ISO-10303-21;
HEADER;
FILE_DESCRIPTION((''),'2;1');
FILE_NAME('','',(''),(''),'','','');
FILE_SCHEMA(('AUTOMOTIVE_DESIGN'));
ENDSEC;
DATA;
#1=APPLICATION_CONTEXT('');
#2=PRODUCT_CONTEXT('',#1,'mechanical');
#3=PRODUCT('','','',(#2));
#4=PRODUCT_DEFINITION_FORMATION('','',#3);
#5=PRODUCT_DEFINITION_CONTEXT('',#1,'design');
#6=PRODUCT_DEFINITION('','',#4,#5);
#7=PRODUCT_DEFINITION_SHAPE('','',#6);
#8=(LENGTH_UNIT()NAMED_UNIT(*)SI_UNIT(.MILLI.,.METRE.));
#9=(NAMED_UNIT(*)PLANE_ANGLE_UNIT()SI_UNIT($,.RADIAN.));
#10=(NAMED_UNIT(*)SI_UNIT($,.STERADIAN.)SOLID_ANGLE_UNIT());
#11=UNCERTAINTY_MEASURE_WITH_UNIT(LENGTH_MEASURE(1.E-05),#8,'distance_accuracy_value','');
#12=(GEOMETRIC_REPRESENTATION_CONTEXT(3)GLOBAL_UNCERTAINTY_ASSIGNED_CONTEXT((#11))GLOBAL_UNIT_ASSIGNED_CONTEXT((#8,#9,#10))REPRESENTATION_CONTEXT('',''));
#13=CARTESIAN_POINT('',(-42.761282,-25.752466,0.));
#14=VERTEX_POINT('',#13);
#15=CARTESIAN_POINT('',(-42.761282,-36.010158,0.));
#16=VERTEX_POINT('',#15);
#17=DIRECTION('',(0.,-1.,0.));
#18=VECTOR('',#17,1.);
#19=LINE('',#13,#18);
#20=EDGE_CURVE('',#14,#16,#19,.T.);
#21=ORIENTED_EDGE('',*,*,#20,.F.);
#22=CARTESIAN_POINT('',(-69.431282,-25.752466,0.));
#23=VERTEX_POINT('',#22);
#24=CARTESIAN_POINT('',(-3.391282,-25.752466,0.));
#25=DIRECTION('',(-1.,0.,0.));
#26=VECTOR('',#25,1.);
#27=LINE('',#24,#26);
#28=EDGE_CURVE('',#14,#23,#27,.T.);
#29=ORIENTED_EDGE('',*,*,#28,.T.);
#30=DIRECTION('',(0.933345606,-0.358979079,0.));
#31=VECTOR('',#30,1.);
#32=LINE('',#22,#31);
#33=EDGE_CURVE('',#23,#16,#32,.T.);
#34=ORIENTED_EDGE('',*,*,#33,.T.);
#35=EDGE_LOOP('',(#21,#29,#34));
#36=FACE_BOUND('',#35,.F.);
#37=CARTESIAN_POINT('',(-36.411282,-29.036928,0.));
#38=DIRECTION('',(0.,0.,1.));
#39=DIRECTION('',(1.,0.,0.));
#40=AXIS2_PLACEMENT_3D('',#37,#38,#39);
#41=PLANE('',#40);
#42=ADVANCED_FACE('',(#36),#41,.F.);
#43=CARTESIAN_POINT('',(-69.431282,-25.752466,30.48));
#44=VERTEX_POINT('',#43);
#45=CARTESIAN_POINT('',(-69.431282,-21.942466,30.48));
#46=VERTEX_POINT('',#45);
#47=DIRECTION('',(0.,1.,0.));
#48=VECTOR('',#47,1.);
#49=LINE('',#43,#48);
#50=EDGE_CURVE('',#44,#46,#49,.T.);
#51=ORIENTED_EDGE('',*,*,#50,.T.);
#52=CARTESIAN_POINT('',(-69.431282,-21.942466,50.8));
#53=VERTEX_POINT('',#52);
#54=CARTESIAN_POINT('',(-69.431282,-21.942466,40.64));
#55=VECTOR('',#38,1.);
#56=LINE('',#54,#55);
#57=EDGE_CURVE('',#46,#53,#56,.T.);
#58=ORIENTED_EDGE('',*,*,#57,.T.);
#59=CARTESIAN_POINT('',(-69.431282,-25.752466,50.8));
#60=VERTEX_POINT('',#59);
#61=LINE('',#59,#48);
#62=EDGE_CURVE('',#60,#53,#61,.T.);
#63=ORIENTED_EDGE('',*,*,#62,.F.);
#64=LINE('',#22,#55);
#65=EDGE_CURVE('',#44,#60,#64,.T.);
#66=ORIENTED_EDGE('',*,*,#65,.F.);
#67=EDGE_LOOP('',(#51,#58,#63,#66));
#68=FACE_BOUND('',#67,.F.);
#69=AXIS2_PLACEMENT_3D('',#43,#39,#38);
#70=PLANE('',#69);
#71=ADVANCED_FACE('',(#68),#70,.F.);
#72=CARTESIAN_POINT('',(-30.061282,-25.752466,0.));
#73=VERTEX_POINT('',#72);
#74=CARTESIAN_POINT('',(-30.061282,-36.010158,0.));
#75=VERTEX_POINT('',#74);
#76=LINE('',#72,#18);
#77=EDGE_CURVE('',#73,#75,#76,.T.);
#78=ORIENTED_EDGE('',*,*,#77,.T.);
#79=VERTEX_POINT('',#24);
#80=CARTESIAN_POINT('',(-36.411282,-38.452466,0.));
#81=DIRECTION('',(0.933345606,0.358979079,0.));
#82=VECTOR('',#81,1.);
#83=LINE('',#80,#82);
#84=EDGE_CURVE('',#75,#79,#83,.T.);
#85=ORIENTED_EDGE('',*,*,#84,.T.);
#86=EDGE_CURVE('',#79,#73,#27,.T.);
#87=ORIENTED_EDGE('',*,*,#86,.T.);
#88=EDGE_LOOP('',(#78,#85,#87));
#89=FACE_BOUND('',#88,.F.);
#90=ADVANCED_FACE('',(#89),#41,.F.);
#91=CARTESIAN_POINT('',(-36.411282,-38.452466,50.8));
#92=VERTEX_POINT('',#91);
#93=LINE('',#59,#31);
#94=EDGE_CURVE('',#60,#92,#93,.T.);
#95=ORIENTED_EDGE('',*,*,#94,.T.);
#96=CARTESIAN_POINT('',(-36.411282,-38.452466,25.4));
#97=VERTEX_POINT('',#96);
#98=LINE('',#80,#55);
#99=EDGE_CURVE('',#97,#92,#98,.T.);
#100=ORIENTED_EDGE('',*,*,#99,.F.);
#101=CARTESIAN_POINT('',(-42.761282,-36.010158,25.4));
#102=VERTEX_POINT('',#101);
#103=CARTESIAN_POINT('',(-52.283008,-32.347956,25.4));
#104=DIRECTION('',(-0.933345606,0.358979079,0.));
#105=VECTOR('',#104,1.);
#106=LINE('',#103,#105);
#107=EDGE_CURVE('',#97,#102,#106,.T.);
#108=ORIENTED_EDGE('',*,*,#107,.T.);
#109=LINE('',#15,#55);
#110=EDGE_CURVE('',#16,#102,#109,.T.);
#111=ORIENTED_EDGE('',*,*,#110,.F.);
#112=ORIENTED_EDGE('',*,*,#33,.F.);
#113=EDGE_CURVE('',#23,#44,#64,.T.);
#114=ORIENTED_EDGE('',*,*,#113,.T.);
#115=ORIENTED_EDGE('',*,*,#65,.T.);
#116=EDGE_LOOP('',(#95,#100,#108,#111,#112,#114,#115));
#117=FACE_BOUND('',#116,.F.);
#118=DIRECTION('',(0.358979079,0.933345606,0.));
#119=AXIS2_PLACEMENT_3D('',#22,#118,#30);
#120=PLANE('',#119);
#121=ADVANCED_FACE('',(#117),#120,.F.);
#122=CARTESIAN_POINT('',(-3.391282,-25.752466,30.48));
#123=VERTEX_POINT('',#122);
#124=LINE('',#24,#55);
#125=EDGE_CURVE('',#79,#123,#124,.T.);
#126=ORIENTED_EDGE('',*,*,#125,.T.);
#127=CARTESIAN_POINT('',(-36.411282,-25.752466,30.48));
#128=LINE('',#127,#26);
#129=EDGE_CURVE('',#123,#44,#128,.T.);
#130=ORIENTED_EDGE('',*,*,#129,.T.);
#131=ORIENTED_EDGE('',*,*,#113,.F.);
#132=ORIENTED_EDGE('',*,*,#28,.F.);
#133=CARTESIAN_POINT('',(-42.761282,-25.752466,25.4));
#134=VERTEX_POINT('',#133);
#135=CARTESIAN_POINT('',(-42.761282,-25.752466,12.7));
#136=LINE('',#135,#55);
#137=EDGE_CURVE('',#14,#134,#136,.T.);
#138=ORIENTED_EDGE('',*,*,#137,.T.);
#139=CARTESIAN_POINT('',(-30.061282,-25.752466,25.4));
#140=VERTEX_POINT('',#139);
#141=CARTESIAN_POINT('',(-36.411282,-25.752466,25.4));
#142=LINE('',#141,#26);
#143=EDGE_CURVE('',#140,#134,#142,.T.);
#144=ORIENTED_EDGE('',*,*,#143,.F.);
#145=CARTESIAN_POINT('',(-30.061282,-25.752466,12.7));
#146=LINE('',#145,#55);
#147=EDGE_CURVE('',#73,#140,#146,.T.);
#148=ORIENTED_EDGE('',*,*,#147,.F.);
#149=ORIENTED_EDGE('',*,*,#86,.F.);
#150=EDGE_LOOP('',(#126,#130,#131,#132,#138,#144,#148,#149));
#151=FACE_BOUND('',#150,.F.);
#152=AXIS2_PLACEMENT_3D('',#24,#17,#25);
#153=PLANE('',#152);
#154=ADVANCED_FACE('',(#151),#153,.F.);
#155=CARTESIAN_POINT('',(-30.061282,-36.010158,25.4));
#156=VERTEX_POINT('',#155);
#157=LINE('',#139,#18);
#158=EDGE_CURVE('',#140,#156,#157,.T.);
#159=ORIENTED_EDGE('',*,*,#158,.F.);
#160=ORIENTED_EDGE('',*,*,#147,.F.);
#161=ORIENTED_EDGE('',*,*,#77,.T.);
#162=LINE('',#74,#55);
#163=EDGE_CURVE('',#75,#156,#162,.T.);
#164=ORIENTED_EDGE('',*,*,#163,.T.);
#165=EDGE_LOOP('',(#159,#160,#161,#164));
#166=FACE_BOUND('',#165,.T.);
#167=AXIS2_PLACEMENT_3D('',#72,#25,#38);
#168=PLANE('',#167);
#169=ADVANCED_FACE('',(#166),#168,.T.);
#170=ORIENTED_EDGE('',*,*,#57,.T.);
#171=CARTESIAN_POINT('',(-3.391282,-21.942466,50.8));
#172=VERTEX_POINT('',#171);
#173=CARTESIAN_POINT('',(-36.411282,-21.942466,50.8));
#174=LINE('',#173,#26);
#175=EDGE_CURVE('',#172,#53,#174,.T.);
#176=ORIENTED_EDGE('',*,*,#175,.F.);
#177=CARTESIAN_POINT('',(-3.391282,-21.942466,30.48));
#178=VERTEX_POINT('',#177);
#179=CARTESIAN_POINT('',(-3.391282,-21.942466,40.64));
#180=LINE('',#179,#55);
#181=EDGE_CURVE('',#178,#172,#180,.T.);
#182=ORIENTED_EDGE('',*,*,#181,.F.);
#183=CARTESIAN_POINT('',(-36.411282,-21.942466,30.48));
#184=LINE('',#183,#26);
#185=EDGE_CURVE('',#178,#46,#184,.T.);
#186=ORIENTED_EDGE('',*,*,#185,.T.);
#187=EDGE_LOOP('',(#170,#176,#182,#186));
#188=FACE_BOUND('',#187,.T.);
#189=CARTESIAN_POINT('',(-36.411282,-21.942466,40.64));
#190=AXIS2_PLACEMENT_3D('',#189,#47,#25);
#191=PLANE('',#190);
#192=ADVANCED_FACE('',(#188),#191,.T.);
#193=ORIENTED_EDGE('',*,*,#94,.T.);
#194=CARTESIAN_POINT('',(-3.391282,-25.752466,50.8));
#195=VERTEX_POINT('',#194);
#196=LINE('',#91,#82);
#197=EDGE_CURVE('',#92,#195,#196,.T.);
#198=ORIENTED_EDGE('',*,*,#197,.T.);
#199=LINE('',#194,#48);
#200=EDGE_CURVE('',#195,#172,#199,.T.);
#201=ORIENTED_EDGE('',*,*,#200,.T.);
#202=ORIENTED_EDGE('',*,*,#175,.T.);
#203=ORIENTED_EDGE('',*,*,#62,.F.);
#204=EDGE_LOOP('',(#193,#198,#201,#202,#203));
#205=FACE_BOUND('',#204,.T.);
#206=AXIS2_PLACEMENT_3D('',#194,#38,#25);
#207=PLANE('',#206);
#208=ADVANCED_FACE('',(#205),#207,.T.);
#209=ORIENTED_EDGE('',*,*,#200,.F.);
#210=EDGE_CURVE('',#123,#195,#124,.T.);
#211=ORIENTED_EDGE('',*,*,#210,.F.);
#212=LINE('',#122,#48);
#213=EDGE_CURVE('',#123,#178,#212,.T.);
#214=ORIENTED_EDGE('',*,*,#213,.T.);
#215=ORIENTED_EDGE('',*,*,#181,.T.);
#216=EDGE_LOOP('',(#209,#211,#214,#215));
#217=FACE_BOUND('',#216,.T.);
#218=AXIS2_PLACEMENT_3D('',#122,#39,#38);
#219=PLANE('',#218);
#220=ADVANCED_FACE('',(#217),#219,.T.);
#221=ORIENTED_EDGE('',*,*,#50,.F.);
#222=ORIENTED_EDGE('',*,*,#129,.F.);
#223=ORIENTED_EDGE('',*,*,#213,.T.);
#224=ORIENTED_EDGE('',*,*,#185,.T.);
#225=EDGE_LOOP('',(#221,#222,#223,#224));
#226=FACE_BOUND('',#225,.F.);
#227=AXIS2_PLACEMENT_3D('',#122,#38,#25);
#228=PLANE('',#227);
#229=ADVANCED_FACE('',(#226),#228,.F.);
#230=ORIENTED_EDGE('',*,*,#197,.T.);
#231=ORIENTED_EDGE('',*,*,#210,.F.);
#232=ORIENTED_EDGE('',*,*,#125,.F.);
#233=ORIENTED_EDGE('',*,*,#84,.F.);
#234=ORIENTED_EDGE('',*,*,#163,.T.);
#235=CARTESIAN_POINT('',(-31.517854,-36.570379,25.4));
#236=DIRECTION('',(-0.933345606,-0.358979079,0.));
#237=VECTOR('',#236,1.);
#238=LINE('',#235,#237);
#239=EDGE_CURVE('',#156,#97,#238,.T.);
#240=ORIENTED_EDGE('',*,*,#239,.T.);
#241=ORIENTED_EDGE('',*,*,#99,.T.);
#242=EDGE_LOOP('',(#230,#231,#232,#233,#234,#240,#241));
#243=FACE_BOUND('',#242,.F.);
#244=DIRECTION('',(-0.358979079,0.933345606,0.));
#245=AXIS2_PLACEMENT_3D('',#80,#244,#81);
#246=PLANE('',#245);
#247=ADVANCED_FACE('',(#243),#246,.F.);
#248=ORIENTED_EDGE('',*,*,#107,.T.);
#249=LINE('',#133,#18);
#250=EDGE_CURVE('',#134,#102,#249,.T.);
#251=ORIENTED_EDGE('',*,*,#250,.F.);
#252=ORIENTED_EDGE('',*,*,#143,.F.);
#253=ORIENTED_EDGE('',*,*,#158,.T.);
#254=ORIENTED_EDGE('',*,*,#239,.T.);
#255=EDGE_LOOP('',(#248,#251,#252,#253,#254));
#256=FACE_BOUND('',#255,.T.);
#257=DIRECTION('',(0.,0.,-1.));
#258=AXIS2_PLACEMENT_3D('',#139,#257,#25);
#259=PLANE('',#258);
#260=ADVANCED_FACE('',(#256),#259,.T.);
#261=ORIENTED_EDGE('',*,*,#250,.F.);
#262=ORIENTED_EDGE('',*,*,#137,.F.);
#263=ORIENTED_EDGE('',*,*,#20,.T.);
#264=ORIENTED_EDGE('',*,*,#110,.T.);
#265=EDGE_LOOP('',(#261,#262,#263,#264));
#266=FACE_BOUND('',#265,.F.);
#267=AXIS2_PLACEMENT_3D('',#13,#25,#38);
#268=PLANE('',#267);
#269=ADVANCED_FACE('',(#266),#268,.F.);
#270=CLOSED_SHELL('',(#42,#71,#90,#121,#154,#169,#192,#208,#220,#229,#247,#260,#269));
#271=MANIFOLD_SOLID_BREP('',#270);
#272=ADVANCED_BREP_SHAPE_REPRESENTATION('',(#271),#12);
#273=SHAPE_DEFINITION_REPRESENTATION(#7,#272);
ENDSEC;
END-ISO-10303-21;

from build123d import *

# Parameters (mm, degrees)
F1_DEPTH = 50.8
F2_W     = 12.7
F2_H     = 25.4
F3_DEPTH = 25.4
F4_W     = 66.04
F4_H     = 20.32
F5_DEPTH = 3.81


# Not quite as in the source:
# - a feature names something its author has since deleted; it is built from what else it names


with BuildPart() as f1:
    # F0 (on Top) → F1 (new body)
    with BuildSketch(Plane.XY):
        Polygon((-3.3912816751, -25.752466172), (-69.4312816751, -25.752466172), (-36.4112816751, -38.452466172), align=None)
    extrude(amount=F1_DEPTH)

    # F2 (on face) → F3 (cut)
    with BuildSketch(Plane(origin=(0, -25.752466172, 0), x_dir=(-1, 0, 0), z_dir=(0, 1, 0))):
        with Locations((36.4112816751, 12.7)):
            Rectangle(F2_W, F2_H)
    extrude(amount=-F3_DEPTH, mode=Mode.SUBTRACT)

    # F4 (on face) → F5 (join)
    with BuildSketch(Plane(origin=(0, -25.752466172, 0), x_dir=(-1, 0, 0), z_dir=(0, 1, 0))):
        with Locations((36.4112816751, 40.64)):
            Rectangle(F4_W, F4_H)
    extrude(amount=F5_DEPTH)


solid = f1.part
